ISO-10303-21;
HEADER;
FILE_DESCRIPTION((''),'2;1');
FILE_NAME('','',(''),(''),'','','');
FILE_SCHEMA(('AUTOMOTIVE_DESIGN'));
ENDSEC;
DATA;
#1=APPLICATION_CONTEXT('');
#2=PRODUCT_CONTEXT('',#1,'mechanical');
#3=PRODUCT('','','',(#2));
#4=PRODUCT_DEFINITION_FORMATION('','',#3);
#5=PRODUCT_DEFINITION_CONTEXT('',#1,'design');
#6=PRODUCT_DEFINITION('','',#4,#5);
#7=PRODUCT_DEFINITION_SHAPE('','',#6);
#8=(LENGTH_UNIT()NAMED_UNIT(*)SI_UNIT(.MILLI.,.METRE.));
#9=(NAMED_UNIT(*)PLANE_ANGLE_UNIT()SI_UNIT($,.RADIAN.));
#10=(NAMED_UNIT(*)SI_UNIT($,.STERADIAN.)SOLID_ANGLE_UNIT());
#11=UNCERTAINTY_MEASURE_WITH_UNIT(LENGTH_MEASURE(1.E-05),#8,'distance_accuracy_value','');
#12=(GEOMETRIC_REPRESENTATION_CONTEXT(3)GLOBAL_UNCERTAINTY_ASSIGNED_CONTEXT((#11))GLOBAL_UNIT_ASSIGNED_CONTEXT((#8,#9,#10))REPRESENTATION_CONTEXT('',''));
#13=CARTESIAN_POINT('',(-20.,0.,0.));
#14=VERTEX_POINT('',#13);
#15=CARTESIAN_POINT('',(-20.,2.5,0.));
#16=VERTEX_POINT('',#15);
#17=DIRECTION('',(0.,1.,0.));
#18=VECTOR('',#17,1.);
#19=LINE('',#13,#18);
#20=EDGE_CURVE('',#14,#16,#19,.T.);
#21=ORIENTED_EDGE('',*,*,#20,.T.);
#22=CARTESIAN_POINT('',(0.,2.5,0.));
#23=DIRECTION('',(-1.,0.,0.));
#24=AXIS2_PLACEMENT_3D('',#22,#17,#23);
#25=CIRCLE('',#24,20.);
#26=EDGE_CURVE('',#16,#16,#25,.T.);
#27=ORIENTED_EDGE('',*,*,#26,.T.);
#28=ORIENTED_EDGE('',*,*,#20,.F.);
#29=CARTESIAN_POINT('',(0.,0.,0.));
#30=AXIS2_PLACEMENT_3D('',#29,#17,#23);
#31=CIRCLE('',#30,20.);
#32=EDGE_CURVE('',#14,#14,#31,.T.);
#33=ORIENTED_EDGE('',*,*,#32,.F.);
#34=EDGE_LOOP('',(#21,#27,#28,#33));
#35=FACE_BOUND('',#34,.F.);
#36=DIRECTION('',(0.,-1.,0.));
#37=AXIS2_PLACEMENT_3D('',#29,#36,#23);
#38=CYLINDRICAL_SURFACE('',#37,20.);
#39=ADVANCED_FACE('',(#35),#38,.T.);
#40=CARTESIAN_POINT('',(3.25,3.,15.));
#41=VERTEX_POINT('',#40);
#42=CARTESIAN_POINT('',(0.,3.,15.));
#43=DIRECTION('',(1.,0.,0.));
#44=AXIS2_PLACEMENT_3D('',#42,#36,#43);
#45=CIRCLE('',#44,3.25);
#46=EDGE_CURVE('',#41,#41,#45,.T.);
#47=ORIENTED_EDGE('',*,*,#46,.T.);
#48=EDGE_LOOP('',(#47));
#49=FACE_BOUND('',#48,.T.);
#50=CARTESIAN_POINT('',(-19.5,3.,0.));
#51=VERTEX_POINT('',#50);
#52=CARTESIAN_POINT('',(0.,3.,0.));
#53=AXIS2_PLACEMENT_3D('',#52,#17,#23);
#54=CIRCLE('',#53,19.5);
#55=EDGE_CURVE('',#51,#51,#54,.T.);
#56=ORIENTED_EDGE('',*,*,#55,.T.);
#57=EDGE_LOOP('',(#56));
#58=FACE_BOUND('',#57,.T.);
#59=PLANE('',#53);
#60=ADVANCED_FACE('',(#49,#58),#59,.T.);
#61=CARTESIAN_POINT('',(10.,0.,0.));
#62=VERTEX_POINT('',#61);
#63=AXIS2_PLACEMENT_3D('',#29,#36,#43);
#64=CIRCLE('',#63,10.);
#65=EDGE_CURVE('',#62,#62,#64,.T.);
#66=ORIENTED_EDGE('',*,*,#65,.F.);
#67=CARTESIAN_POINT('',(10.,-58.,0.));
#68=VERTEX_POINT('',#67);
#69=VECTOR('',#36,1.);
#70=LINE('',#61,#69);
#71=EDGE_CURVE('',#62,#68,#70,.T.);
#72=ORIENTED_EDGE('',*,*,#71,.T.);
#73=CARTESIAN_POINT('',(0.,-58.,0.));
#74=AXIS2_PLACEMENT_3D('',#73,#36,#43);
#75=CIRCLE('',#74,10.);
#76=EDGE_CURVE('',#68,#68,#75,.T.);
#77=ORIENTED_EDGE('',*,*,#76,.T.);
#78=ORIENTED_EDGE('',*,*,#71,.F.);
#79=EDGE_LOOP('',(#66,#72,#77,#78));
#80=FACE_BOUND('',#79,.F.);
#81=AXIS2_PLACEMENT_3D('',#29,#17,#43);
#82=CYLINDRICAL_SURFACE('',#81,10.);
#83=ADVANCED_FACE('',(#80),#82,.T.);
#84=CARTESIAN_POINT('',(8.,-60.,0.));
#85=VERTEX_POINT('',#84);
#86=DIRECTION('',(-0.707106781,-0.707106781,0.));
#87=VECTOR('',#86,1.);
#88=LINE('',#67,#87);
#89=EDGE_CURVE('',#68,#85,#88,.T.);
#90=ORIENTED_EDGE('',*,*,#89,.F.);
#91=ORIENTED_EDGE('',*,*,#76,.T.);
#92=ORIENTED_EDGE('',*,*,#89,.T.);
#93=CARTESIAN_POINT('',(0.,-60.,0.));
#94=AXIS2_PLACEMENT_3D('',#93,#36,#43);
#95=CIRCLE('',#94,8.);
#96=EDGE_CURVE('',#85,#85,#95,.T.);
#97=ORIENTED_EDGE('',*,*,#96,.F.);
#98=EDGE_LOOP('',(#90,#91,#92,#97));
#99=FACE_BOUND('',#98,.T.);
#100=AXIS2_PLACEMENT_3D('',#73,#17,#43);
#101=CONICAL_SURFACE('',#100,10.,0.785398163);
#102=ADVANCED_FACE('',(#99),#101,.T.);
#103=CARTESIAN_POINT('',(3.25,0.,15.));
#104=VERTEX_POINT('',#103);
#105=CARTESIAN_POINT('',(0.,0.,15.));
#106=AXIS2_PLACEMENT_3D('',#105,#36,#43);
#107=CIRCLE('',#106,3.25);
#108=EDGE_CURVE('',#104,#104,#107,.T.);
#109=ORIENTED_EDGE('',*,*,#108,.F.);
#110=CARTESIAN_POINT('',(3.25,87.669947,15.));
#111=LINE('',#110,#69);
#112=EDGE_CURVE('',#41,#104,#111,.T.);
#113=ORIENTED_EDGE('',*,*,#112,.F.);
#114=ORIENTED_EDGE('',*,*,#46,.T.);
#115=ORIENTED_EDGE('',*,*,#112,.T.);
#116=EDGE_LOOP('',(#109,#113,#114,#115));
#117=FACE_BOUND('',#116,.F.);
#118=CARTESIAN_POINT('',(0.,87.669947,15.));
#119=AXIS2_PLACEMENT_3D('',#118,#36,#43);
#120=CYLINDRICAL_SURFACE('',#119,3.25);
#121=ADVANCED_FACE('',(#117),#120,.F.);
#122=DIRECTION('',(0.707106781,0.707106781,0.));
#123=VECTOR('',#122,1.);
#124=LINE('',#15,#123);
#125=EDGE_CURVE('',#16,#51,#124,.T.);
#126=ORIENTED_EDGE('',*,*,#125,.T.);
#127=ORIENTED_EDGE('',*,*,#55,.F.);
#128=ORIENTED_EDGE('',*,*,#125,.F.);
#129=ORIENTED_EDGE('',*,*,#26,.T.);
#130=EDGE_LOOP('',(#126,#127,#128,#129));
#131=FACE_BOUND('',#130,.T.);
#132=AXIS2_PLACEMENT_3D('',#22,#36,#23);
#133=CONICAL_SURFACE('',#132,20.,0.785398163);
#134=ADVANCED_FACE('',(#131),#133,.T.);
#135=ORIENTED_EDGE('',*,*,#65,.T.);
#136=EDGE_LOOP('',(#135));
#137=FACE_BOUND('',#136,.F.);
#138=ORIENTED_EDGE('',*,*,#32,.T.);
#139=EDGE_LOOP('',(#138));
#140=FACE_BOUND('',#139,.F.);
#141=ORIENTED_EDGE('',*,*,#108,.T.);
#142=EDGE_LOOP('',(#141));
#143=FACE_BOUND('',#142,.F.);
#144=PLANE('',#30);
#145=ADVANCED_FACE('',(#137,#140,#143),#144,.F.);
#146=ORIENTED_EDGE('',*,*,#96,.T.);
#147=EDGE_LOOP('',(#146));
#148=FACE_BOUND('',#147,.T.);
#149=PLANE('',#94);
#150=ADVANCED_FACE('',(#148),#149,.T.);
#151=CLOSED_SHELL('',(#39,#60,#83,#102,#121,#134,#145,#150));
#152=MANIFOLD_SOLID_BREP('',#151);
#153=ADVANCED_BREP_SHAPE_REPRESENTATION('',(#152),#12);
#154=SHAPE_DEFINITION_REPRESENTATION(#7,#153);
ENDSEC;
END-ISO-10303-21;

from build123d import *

# Parameters (mm, degrees)
F0_R     = 10
F1_DEPTH = 60
F2_R     = 20
F2_R_2   = 10
F3_DEPTH = 3
F4_SIZE  = 2
F6_D     = 6.5
F7_SIZE  = 0.5


with BuildPart() as f1:
    # F0 (on Front) → F1 (new body)
    with BuildSketch(Plane.XZ):
        Circle(F0_R)
    extrude(amount=F1_DEPTH)

    # F2 (on face) → F3 (join)
    with BuildSketch(Plane(origin=(0, 0, 0), x_dir=(-1, 0, 0), z_dir=(0, 1, 0))):
        Circle(F2_R)
        Circle(F2_R_2, mode=Mode.SUBTRACT)
        Circle(F2_R_2)
    extrude(amount=F3_DEPTH)

    # F4
    f4_edges = [f1.edges().sort_by_distance(p)[0] for p in [
        (-10, -60, 0),
    ]]
    chamfer(f4_edges, length=F4_SIZE)

    # F6 (through all)
    with Locations(Plane(origin=(0, 3, 0), x_dir=(-1, 0, 0), z_dir=(0, 1, 0))):
        with Locations((0, 15)):
            Hole(F6_D / 2)

    # F7
    f7_edges = [f1.edges().sort_by_distance(p)[0] for p in [
        (20, 3, 0),
    ]]
    chamfer(f7_edges, length=F7_SIZE)


solid = f1.part
